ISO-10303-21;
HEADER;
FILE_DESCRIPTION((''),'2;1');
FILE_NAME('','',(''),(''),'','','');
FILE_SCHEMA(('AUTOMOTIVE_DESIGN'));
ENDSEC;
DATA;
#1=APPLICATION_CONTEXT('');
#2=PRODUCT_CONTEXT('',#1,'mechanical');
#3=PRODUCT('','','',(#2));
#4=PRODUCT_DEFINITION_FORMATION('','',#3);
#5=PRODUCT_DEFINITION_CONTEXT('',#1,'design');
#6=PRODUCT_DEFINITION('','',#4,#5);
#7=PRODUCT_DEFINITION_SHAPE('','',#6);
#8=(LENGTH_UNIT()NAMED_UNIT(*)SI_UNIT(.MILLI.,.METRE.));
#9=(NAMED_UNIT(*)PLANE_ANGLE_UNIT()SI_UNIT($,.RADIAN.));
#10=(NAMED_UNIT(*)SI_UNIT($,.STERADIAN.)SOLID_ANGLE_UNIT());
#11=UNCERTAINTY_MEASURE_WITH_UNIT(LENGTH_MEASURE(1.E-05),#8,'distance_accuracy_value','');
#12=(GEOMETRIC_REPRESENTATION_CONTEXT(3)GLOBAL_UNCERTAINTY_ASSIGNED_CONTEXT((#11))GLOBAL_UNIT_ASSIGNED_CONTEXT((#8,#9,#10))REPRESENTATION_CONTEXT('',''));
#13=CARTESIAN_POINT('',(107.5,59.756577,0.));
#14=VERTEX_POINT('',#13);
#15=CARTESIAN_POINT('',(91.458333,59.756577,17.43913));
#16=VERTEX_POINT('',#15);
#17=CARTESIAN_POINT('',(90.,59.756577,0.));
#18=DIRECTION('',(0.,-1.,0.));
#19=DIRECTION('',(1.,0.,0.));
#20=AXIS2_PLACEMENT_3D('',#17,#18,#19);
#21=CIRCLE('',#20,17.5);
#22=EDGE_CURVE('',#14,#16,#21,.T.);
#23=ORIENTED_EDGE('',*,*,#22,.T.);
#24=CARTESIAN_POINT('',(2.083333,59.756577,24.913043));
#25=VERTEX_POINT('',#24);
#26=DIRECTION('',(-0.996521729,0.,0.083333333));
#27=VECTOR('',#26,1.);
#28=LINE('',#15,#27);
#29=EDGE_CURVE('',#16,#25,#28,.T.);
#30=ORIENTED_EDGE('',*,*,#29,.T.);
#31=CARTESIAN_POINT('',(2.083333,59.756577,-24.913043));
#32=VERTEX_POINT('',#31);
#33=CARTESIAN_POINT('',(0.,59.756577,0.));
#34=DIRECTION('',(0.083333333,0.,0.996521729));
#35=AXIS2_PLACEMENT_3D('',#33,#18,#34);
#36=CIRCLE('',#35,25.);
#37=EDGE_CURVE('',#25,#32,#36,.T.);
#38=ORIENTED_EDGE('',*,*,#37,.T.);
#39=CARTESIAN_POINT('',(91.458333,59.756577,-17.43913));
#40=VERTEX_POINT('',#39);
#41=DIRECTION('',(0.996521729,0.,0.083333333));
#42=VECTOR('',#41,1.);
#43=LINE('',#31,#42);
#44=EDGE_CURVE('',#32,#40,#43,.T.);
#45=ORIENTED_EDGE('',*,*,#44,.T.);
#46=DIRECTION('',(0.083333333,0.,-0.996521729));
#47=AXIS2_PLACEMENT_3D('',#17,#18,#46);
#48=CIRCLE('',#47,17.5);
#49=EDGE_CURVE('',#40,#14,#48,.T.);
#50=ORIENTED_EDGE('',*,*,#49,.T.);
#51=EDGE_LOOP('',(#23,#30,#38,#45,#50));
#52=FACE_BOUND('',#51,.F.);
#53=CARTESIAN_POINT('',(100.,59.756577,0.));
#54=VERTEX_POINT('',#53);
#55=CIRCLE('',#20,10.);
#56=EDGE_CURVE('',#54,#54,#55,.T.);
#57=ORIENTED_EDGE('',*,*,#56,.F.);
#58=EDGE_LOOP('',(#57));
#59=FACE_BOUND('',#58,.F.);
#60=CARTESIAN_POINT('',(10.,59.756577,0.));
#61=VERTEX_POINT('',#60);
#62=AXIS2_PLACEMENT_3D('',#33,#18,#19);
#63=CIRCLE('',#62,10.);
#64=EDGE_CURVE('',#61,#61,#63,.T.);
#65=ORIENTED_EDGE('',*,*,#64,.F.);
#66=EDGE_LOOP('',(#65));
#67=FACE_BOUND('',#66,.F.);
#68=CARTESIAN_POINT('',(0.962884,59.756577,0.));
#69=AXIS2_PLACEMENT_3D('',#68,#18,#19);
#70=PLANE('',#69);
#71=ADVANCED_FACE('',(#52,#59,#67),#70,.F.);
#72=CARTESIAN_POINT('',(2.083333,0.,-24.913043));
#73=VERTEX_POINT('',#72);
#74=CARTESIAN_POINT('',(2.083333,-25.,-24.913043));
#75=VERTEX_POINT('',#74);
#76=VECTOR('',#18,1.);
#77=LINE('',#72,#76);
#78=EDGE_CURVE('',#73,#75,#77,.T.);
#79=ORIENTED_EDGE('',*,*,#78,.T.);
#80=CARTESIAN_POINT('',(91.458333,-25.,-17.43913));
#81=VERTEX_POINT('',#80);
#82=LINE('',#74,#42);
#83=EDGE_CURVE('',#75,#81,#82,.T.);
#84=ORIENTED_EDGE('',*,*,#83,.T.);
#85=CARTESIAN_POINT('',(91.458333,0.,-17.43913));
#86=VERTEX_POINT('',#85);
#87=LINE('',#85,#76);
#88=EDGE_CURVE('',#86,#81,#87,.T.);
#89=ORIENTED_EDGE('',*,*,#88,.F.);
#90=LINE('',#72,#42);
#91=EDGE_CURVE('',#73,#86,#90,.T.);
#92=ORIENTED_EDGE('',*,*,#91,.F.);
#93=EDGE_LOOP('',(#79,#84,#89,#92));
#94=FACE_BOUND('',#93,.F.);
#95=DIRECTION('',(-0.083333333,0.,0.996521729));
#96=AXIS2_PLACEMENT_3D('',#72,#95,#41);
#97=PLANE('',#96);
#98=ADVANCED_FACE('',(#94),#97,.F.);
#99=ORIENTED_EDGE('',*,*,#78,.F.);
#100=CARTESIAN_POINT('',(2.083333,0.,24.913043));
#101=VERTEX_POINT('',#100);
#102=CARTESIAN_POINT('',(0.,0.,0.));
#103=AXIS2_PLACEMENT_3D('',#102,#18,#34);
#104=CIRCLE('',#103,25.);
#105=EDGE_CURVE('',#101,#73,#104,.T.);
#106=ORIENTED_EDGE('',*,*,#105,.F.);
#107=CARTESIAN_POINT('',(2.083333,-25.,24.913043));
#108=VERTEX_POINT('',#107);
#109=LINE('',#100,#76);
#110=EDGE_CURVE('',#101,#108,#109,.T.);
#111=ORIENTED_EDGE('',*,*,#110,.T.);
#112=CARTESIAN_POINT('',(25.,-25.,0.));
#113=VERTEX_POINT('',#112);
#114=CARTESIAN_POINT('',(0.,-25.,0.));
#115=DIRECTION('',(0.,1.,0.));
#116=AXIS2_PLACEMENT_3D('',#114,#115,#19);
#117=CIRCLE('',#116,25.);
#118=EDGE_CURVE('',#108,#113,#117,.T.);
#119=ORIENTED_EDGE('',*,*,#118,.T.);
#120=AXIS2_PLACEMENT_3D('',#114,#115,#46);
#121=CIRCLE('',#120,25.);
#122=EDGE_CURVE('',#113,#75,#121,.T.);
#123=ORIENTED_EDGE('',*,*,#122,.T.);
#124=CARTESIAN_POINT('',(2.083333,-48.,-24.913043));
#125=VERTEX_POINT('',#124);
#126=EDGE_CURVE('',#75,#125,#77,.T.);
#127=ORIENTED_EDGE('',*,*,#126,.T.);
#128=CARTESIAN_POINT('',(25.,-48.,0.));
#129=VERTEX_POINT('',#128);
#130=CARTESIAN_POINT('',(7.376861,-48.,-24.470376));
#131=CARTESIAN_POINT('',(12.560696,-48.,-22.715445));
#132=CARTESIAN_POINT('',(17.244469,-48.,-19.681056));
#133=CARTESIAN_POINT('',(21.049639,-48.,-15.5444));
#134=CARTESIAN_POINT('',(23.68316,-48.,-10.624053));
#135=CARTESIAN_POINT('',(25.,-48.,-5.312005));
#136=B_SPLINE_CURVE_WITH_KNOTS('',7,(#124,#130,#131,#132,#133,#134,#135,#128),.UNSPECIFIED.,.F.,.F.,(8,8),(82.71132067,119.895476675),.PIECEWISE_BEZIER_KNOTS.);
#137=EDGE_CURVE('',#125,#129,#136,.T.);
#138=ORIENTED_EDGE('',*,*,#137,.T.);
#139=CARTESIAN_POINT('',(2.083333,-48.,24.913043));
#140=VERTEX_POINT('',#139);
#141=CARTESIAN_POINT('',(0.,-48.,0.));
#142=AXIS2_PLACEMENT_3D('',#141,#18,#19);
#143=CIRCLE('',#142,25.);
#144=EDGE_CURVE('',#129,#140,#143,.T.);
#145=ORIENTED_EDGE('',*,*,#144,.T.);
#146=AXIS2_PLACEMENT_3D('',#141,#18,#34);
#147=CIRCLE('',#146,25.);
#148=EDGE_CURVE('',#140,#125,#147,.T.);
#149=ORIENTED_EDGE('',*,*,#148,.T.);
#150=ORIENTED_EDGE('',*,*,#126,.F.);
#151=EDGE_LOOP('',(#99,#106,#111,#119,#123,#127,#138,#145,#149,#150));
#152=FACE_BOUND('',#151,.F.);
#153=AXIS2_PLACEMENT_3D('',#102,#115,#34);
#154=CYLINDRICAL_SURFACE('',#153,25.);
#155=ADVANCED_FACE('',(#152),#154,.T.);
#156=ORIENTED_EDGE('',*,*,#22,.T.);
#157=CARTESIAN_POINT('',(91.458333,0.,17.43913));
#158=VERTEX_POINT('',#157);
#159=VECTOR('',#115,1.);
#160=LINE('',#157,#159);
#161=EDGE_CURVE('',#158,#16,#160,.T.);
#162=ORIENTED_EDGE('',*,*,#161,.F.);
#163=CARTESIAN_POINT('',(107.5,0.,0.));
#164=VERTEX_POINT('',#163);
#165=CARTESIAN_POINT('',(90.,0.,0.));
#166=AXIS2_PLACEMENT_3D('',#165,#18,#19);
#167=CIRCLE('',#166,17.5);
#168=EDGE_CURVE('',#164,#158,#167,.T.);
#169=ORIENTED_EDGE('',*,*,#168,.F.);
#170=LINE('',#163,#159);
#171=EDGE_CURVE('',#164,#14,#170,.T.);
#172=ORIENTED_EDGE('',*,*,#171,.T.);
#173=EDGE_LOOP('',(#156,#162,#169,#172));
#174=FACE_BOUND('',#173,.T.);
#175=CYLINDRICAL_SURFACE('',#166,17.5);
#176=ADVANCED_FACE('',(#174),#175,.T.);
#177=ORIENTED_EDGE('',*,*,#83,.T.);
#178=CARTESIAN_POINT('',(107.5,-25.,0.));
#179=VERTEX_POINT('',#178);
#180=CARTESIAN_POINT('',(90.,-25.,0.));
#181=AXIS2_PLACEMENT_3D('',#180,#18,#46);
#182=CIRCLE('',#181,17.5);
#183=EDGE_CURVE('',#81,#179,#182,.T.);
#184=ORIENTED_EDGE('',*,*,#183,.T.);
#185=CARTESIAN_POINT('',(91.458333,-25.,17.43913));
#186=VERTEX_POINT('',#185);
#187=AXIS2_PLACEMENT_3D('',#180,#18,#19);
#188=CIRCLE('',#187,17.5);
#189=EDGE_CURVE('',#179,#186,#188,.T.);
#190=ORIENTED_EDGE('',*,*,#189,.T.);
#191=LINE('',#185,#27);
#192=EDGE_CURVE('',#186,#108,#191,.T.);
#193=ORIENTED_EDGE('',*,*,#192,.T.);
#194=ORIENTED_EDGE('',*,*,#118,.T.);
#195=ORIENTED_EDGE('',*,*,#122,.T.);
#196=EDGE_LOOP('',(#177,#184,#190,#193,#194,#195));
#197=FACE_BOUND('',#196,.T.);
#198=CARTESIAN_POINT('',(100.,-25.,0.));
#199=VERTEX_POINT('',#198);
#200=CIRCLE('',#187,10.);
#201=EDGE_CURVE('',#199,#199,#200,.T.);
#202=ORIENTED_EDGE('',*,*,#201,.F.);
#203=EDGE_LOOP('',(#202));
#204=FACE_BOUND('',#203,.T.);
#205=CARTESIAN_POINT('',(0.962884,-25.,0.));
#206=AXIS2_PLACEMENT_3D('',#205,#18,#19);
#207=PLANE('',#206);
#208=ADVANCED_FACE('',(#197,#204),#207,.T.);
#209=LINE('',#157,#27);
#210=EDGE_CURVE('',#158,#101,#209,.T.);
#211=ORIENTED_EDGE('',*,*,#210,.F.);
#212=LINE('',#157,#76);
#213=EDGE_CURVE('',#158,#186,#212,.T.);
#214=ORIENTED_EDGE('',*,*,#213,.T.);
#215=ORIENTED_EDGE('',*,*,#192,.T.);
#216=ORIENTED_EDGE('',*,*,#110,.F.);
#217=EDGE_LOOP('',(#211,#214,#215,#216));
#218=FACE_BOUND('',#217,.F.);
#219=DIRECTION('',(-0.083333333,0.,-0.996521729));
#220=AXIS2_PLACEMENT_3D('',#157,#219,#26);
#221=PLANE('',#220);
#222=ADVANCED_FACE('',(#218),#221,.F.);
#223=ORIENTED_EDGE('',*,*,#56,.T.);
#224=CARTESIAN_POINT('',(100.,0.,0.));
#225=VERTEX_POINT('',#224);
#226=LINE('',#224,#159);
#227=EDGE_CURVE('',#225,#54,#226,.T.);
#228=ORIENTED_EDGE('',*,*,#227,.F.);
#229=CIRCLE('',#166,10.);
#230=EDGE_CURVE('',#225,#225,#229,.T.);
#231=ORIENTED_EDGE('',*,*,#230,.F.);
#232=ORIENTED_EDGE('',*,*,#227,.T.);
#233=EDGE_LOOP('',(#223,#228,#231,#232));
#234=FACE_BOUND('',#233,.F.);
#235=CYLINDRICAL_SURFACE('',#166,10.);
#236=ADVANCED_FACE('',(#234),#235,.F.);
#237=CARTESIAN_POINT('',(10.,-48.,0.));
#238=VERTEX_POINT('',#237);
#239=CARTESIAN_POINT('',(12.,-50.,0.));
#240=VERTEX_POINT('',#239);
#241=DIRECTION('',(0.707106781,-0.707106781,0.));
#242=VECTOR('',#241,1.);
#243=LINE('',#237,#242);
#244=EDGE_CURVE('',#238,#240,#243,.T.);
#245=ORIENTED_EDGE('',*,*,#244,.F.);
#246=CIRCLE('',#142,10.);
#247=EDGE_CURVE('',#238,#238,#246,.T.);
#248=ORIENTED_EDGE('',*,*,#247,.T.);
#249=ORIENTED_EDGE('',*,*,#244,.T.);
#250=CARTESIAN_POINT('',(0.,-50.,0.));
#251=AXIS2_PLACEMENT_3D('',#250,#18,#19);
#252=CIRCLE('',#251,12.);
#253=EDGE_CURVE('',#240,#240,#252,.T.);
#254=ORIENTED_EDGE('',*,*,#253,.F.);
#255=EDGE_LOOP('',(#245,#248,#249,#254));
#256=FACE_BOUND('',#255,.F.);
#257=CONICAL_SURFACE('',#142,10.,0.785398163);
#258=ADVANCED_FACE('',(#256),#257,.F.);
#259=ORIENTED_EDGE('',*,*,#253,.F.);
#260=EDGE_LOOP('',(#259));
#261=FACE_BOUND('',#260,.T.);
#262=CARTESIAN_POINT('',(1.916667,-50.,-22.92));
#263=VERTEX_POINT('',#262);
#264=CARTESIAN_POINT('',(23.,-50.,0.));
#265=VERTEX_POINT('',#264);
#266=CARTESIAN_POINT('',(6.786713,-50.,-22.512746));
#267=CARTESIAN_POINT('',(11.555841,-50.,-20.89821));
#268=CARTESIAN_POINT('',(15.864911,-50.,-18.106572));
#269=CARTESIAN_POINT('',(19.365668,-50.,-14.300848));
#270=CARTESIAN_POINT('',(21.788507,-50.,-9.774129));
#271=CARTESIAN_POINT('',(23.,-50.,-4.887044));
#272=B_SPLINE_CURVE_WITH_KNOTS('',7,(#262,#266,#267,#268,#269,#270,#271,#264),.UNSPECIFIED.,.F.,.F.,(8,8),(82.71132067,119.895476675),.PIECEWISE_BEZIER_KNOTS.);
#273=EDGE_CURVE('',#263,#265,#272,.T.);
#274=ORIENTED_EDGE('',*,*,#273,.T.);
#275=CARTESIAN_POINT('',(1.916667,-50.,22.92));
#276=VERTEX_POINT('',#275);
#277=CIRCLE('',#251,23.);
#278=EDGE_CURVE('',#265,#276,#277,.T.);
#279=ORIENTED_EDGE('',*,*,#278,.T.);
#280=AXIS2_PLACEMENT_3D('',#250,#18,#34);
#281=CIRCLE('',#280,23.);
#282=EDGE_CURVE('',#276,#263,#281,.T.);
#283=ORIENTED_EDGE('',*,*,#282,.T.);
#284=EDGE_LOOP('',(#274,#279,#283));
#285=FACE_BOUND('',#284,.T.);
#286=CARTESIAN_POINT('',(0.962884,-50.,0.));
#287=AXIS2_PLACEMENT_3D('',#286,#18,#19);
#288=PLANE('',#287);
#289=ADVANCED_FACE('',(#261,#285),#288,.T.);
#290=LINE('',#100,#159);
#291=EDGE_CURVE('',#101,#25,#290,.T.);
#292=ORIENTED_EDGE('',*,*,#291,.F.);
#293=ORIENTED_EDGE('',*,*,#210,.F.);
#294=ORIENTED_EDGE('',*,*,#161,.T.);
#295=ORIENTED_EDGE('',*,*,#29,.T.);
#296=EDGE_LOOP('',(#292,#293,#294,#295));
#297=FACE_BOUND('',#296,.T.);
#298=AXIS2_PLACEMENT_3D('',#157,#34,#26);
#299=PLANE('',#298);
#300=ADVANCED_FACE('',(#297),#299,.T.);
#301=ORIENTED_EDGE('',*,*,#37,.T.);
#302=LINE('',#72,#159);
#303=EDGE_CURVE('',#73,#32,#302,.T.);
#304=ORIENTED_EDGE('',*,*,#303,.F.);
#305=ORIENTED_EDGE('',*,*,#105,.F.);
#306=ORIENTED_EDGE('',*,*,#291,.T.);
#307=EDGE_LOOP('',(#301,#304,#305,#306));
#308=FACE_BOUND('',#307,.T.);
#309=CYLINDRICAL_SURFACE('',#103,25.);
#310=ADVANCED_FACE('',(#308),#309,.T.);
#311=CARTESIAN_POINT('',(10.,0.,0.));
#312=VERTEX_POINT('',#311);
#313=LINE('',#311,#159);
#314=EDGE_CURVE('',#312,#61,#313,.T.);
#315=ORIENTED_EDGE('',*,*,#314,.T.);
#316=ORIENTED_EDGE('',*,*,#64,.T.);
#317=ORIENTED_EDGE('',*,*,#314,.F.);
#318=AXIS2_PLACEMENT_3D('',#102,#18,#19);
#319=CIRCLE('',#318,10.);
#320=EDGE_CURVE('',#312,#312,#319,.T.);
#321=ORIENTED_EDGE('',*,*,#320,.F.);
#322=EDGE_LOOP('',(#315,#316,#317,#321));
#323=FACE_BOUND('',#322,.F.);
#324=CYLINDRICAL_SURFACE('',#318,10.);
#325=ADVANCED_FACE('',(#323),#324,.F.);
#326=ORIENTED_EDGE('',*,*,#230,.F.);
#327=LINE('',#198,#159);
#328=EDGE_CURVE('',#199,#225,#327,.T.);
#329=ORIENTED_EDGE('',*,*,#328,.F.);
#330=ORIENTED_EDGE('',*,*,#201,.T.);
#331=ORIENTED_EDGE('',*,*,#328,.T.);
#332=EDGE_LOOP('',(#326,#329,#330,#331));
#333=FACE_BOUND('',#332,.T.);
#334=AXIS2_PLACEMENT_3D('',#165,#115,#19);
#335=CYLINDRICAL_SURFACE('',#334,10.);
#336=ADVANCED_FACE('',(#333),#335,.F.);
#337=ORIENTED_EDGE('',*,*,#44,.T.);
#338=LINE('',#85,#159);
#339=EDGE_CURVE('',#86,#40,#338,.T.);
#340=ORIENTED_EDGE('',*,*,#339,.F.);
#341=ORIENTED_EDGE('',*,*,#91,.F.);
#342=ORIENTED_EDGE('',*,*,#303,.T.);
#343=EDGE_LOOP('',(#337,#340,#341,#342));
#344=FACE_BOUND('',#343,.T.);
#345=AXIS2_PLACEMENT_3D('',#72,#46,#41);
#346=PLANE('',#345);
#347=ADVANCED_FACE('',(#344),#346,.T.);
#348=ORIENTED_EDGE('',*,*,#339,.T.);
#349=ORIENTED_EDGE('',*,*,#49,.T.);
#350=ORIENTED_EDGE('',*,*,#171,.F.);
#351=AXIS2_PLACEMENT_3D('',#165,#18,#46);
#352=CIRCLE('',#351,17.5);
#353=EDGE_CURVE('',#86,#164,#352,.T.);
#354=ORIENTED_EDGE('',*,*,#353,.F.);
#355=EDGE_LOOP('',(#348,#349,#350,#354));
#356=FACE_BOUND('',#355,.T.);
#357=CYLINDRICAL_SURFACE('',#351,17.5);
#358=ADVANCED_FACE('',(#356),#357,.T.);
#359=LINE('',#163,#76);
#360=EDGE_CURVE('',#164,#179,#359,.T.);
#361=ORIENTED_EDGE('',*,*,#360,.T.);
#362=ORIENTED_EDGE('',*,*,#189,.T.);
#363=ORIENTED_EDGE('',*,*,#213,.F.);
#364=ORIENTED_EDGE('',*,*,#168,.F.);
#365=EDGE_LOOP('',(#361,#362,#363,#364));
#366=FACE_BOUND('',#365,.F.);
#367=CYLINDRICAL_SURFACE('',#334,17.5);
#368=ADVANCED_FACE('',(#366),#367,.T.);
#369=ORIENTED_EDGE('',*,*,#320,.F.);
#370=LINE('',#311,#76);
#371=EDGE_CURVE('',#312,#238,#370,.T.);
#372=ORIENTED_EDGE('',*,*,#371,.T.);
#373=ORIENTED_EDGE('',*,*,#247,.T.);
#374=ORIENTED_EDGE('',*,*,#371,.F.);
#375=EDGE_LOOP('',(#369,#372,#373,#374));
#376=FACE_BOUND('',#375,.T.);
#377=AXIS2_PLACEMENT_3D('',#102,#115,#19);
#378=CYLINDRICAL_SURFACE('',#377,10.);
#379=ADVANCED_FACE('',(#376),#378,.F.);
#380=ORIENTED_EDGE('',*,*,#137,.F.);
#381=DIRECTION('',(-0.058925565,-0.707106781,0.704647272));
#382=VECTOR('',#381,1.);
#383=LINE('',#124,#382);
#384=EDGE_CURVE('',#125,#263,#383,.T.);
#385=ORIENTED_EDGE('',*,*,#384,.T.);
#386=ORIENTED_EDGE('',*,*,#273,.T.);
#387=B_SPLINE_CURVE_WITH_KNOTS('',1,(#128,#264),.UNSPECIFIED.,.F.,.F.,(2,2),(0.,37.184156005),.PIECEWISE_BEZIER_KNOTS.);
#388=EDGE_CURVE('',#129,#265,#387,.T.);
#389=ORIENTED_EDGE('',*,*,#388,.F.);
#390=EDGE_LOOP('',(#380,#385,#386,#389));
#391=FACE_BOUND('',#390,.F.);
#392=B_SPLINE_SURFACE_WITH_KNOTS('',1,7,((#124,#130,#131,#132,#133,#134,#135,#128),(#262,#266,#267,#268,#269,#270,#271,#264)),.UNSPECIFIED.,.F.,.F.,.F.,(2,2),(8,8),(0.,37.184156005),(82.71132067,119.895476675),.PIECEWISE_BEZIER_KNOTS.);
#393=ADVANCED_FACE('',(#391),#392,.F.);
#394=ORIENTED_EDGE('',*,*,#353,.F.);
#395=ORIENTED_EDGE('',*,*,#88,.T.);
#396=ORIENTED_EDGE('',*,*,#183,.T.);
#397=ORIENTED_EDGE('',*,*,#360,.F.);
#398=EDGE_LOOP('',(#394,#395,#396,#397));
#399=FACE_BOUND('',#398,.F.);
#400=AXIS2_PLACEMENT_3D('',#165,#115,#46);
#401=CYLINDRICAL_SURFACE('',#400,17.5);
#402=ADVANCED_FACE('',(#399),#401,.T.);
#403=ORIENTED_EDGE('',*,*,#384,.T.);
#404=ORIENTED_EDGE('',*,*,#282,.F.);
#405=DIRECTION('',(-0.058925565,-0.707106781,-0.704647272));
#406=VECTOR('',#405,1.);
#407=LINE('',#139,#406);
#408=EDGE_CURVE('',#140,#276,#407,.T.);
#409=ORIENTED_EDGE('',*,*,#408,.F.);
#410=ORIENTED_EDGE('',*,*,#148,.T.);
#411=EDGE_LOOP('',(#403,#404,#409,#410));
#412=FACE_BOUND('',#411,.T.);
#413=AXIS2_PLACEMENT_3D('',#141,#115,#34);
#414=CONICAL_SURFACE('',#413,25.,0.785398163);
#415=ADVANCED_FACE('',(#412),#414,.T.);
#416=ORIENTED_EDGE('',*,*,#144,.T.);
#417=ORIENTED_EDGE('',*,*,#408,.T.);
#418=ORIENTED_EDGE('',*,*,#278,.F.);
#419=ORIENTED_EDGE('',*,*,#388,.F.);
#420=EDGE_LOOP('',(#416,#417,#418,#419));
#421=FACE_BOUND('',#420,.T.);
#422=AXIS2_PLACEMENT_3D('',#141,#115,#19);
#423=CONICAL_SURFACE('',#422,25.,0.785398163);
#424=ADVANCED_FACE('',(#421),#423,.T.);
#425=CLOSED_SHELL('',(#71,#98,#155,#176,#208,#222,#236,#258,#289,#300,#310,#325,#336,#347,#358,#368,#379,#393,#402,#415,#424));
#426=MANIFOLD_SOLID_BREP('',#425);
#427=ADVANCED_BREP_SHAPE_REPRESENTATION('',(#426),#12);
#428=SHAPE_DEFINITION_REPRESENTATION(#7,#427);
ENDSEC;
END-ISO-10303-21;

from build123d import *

# Parameters (mm, degrees)
F0_R          = 10
F1_DEPTH      = 25
F2_DEPTH      = 50
F3_SIZE       = 2
F5_DEPTH      = 25
F5_DEPTH_BACK = 59.7565770149


# Not quite as in the source:
# - the program builds the solid bodies; features that only make, move or delete a surface that nothing else refers to are left out


with BuildPart() as f1:
    # F0 (on Front) → F1 (new body)
    with BuildSketch(Plane.XZ):
        with BuildLine():
            ThreePointArc((2.0833333333, -24.9130432148), (18.3995018048, -16.9250800097), (25, 0))
            ThreePointArc((25, 0), (18.3995018048, 16.9250800097), (2.0833333333, 24.9130432148))
            ThreePointArc((2.0833333333, 24.9130432148), (-25, 0), (2.0833333333, -24.9130432148))
        make_face()
        Circle(F0_R, mode=Mode.SUBTRACT)
        with BuildLine():
            ThreePointArc((2.0833333333, 24.9130432148), (18.3995018048, 16.9250800097), (25, 0))
            ThreePointArc((25, 0), (18.3995018048, -16.9250800097), (2.0833333333, -24.9130432148))
            Line((2.0833333333, -24.9130432148), (91.4583333333, -17.4391302504))
            ThreePointArc((91.4583333333, -17.4391302504), (72.5, 0), (91.4583333333, 17.4391302504))
            Line((91.4583333333, 17.4391302504), (2.0833333333, 24.9130432148))
        make_face()
        with BuildLine():
            ThreePointArc((107.5, 0), (102.8796512634, 11.8475560068), (91.4583333333, 17.4391302504))
            ThreePointArc((91.4583333333, 17.4391302504), (72.5, 0), (91.4583333333, -17.4391302504))
            ThreePointArc((91.4583333333, -17.4391302504), (102.8796512634, -11.8475560068), (107.5, 0))
        make_face()
        with Locations((90, 0)):
            Circle(F0_R, mode=Mode.SUBTRACT)
    extrude(amount=F1_DEPTH)

    # F0 (on Front) → F2 (join)
    with BuildSketch(Plane.XZ):
        with BuildLine():
            ThreePointArc((2.0833333333, -24.9130432148), (18.3995018048, -16.9250800097), (25, 0))
            ThreePointArc((25, 0), (18.3995018048, 16.9250800097), (2.0833333333, 24.9130432148))
            ThreePointArc((2.0833333333, 24.9130432148), (-25, 0), (2.0833333333, -24.9130432148))
        make_face()
        Circle(F0_R, mode=Mode.SUBTRACT)
    extrude(amount=F2_DEPTH)

    # F3
    f3_edges = [f1.edges().sort_by_distance(p)[0] for p in [
        (-2.083333, -50, 24.913043),
        (-10, -50, 0),
        (80, -25, 0),
    ]]
    chamfer(f3_edges, length=F3_SIZE)

    # F0 (on Front) → F5 (join, two sides)
    with BuildSketch(Plane.XZ) as f5_sk:
        with BuildLine():
            ThreePointArc((2.0833333333, -24.9130432148), (18.3995018048, -16.9250800097), (25, 0))
            ThreePointArc((25, 0), (18.3995018048, 16.9250800097), (2.0833333333, 24.9130432148))
            ThreePointArc((2.0833333333, 24.9130432148), (-25, 0), (2.0833333333, -24.9130432148))
        make_face()
        Circle(F0_R, mode=Mode.SUBTRACT)
        with BuildLine():
            ThreePointArc((2.0833333333, 24.9130432148), (18.3995018048, 16.9250800097), (25, 0))
            ThreePointArc((25, 0), (18.3995018048, -16.9250800097), (2.0833333333, -24.9130432148))
            Line((2.0833333333, -24.9130432148), (91.4583333333, -17.4391302504))
            ThreePointArc((91.4583333333, -17.4391302504), (72.5, 0), (91.4583333333, 17.4391302504))
            Line((91.4583333333, 17.4391302504), (2.0833333333, 24.9130432148))
        make_face()
        with BuildLine():
            ThreePointArc((107.5, 0), (102.8796512634, 11.8475560068), (91.4583333333, 17.4391302504))
            ThreePointArc((91.4583333333, 17.4391302504), (72.5, 0), (91.4583333333, -17.4391302504))
            ThreePointArc((91.4583333333, -17.4391302504), (102.8796512634, -11.8475560068), (107.5, 0))
        make_face()
        with Locations((90, 0)):
            Circle(F0_R, mode=Mode.SUBTRACT)
    extrude(amount=F5_DEPTH)
    extrude(f5_sk.sketch, amount=-F5_DEPTH_BACK)


solid = f1.part
